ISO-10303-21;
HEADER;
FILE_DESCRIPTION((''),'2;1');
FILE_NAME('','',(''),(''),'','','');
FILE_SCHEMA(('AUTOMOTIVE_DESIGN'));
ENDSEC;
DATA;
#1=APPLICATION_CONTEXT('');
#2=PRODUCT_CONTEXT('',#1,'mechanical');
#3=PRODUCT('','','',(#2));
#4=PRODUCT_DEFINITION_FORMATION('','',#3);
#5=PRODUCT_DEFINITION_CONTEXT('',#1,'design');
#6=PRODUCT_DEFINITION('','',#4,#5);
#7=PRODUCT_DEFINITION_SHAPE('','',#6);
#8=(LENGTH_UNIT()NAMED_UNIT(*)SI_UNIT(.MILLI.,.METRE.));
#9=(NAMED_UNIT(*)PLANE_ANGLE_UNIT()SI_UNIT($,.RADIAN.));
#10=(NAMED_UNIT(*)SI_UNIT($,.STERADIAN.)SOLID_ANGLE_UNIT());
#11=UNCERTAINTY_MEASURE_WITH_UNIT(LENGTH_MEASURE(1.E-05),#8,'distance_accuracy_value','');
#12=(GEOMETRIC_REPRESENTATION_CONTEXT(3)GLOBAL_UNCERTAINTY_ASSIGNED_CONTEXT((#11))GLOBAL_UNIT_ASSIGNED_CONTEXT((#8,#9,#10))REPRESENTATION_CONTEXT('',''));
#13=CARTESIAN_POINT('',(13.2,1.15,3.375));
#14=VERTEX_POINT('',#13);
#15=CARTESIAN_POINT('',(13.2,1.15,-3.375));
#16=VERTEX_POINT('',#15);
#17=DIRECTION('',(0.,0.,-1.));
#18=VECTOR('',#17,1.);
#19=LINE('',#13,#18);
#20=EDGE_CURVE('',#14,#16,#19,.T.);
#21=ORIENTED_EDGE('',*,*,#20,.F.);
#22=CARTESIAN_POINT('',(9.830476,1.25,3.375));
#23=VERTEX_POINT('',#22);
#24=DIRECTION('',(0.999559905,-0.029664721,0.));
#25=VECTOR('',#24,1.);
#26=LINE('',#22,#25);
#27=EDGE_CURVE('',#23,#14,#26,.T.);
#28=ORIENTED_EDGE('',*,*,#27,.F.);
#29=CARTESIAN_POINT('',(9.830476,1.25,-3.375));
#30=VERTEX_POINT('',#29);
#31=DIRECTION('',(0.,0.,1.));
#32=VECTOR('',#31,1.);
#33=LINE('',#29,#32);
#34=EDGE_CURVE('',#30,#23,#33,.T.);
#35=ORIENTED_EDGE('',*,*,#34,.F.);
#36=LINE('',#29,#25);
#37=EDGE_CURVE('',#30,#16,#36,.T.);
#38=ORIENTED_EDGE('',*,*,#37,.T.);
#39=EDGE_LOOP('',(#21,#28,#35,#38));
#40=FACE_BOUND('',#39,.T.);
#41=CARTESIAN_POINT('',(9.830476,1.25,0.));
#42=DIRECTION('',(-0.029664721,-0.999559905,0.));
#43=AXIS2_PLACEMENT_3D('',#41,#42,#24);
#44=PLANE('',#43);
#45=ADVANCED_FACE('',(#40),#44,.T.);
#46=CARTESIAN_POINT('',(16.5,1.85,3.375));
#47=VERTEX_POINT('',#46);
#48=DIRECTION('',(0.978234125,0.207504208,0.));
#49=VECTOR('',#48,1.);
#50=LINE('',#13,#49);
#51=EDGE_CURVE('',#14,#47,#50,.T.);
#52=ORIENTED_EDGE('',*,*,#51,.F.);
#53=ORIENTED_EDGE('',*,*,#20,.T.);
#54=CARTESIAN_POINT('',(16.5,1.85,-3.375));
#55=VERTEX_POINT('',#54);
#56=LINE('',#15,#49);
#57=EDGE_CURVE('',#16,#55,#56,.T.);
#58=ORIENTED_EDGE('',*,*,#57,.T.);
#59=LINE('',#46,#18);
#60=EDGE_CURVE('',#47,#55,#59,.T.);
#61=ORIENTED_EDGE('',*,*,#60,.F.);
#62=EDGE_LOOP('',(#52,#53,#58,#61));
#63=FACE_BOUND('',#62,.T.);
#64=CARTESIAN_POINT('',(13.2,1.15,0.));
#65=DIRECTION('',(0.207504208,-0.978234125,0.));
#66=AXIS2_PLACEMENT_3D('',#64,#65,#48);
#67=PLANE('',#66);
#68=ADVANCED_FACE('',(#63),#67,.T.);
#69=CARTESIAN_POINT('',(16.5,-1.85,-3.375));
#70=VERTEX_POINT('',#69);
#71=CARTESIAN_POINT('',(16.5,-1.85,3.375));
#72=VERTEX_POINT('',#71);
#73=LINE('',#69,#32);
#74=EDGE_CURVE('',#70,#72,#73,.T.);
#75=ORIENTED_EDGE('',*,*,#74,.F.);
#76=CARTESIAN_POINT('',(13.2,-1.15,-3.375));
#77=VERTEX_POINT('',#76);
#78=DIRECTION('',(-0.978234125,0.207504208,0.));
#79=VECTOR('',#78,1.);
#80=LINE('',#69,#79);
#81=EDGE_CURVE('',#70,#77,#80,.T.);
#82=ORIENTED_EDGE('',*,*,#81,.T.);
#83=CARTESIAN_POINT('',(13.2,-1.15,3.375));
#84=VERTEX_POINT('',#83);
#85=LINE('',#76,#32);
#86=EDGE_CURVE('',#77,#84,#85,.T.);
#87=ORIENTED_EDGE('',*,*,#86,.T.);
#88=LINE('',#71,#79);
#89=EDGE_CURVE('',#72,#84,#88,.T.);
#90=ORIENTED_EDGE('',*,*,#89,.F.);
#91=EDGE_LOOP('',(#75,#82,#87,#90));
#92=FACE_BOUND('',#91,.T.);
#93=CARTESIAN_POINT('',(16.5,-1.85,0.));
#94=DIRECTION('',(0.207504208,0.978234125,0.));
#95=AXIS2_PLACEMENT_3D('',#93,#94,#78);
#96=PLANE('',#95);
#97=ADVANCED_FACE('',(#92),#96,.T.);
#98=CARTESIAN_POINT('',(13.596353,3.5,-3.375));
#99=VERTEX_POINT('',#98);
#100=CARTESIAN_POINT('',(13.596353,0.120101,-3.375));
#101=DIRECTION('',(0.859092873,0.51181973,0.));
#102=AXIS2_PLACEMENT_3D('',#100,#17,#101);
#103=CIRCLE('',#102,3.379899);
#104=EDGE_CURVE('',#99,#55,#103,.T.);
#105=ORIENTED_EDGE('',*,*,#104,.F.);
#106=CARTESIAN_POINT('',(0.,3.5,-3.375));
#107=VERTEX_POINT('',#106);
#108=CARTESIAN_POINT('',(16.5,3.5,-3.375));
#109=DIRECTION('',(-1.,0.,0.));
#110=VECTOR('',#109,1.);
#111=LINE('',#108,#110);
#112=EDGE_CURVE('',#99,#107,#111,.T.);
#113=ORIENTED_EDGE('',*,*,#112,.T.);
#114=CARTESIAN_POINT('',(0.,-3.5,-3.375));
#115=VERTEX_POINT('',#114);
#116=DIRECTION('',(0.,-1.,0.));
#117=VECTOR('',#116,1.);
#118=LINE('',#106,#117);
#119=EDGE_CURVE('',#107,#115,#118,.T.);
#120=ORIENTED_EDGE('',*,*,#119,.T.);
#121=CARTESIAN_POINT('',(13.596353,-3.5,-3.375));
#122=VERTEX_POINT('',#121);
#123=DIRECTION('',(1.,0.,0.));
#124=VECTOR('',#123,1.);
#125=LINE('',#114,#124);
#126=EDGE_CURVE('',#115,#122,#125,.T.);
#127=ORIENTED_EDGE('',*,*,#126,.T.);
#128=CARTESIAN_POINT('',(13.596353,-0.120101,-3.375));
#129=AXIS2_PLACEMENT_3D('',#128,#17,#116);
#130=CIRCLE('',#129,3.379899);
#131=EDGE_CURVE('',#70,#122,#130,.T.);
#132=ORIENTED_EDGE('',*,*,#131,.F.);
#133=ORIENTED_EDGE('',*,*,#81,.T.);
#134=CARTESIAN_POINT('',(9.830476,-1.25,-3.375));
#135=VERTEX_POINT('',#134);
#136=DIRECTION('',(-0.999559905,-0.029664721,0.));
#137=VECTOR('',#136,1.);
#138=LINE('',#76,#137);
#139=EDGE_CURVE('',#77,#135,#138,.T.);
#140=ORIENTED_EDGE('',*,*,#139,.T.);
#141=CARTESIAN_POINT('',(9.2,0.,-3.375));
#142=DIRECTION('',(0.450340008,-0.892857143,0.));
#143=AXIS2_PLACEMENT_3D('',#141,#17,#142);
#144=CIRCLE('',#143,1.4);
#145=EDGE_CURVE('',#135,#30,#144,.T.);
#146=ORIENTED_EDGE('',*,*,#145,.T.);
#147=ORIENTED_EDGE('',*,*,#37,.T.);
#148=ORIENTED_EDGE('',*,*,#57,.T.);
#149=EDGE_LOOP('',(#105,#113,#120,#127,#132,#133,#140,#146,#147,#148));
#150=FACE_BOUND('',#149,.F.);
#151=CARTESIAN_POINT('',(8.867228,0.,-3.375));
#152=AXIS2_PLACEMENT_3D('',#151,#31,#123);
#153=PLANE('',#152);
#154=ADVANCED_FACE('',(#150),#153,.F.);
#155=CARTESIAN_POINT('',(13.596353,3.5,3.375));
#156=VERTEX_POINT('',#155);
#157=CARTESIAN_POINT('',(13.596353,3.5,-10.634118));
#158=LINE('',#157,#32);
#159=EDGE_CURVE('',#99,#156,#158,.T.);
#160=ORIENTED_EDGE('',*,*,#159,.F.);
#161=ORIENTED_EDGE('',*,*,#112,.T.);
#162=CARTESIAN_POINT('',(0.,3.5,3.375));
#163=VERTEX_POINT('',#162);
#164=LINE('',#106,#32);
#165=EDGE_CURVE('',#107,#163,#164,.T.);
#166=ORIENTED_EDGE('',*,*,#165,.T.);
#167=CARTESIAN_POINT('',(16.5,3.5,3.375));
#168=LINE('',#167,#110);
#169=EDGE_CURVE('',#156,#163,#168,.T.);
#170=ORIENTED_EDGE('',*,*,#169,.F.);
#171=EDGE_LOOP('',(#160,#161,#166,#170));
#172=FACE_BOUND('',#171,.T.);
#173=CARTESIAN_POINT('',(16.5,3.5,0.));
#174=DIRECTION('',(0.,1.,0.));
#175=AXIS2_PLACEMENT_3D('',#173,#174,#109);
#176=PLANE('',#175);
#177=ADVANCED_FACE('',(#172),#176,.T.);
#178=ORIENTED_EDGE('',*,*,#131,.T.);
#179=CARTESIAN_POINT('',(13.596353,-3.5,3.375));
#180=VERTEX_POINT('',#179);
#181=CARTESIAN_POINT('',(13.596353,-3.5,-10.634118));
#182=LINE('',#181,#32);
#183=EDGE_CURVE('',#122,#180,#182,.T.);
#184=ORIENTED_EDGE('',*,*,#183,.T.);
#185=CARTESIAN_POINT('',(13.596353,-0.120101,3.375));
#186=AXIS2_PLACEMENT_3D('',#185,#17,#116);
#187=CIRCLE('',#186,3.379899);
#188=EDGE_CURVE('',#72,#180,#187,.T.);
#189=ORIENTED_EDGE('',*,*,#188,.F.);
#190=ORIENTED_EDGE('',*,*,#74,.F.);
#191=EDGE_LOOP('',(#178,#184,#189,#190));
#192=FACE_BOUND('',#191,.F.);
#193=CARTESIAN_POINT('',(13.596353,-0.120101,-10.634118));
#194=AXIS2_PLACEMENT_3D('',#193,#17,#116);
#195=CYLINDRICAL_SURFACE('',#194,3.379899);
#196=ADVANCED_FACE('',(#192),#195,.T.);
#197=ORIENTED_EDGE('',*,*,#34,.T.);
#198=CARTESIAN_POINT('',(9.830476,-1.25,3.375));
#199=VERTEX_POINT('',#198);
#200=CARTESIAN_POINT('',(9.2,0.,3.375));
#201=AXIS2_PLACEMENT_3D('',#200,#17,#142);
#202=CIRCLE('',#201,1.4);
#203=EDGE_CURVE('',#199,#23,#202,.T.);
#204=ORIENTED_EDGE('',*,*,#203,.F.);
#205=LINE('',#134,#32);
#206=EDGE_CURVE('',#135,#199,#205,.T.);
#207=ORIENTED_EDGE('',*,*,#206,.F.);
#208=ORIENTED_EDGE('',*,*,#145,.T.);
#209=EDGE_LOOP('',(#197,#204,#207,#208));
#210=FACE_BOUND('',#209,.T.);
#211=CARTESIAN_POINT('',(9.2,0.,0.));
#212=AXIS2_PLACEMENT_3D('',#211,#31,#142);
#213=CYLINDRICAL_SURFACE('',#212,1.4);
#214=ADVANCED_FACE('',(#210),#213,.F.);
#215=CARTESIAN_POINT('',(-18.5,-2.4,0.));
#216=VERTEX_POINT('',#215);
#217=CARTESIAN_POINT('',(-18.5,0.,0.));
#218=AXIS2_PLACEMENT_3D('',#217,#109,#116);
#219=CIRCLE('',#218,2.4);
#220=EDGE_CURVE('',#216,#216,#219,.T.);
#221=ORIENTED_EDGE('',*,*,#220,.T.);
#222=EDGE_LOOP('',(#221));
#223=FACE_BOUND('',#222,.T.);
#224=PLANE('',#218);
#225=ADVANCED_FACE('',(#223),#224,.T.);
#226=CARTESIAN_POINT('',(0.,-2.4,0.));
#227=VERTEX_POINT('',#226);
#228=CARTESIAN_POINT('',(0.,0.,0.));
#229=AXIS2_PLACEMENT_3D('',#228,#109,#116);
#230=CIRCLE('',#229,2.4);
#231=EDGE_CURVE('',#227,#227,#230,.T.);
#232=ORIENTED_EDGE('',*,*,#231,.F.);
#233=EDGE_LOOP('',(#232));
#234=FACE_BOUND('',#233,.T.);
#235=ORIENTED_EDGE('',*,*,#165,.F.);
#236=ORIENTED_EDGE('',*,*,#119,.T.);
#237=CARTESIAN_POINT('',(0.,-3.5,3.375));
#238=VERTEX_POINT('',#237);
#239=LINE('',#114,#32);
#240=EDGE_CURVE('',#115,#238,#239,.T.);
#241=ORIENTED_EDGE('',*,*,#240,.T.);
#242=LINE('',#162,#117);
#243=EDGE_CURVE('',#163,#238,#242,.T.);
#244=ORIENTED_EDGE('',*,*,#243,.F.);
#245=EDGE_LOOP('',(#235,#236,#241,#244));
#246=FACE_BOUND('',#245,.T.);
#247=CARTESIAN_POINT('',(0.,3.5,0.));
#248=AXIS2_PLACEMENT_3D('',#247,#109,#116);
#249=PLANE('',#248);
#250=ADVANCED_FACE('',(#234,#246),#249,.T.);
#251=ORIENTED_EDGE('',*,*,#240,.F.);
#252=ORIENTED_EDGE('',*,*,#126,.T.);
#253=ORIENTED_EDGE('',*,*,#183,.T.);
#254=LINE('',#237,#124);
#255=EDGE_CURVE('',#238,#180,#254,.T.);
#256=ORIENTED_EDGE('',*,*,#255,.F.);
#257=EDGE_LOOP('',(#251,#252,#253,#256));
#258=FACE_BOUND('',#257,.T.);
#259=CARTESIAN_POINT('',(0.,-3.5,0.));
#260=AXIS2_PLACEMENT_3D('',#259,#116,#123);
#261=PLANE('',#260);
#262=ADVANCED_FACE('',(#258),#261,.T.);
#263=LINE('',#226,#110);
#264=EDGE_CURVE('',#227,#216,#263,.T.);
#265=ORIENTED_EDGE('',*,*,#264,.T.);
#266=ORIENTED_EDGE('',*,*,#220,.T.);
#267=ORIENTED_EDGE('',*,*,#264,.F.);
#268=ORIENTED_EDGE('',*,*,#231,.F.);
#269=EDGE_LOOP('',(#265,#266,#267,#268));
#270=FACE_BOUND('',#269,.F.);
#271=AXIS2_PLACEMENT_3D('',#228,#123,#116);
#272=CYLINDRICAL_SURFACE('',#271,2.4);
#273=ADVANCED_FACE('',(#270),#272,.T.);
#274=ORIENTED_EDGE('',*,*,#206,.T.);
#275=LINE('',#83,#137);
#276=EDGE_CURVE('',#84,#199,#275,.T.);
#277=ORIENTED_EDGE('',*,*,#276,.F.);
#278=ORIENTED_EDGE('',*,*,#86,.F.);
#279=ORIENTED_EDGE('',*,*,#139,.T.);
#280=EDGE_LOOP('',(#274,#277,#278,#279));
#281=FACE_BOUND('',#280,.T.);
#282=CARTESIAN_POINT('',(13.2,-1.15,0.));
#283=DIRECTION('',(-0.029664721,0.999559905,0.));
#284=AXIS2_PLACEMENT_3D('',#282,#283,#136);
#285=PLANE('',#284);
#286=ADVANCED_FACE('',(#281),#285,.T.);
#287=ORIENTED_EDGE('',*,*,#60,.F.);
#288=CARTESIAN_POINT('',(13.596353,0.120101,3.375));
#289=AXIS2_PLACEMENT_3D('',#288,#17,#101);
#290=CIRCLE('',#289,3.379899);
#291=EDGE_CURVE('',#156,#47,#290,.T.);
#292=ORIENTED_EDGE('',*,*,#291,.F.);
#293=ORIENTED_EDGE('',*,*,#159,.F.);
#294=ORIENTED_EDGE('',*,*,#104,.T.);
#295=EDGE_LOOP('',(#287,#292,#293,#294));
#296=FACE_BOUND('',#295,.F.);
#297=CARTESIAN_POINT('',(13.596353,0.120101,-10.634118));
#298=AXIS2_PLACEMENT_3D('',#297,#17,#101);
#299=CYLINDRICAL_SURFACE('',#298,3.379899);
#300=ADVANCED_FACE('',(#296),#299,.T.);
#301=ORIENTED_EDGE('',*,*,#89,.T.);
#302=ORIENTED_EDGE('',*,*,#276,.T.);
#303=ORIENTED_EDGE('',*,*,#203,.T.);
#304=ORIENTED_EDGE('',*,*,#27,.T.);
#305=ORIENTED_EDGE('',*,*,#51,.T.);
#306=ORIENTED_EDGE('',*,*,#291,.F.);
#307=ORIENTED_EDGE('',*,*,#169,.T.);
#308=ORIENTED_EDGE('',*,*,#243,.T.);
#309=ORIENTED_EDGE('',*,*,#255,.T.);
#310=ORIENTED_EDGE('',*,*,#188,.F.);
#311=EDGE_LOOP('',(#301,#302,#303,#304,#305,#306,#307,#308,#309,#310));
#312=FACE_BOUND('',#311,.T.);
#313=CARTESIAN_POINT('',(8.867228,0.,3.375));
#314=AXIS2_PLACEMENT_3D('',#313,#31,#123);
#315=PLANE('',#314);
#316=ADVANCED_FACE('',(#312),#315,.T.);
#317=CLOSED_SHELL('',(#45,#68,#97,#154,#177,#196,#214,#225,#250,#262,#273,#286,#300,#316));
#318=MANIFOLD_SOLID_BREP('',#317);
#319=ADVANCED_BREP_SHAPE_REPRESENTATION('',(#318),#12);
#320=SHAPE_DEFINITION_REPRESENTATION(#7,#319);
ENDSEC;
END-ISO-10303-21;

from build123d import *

# Parameters (mm, degrees)
F1_DEPTH      = 3.375
F1_DEPTH_BACK = 3.375
F2_R          = 2.4
F3_DEPTH      = 18.5
F4_T1_DEPTH   = 21.2682356522


# Not quite as in the source:
# - a fillet or chamfer that OpenCascade refuses, or shapes differently, is made with other operations: its cross-section is extruded or revolved along the edge and cut away or added


with BuildPart() as f1:
    # F0 (on Top) → F1 (new body, two sides)
    with BuildSketch(Plane.XY) as f1_sk:
        with BuildLine():
            Line((16.5, 3.5), (0, 3.5))
            Line((0, 3.5), (0, 2.35))
            Line((0, 2.35), (0, -2.35))
            Line((0, -2.35), (0, -3.5))
            Line((0, -3.5), (16.5, -3.5))
            Line((16.5, -3.5), (16.5, -1.85))
            Line((16.5, -1.85), (13.2, -1.15))
            Line((13.2, -1.15), (9.8304760106, -1.25))
            ThreePointArc((9.8304760106, -1.25), (7.8, 0), (9.8304760106, 1.25))
            Line((9.8304760106, 1.25), (13.2, 1.15))
            Line((13.2, 1.15), (16.5, 1.85))
            Line((16.5, 1.85), (16.5, 3.5))
        make_face()
    extrude(amount=F1_DEPTH)
    extrude(f1_sk.sketch, amount=-F1_DEPTH_BACK)

    # F2 (on face) → F3 (join)
    with BuildSketch(Plane(origin=(0, 0, 0), x_dir=(0, -1, 0), z_dir=(-1, 0, 0))):
        Circle(F2_R)
    extrude(amount=F3_DEPTH)

    # F4: fillet of radius 3.3798989873 on 2 edges, made by hand

    # F4_s2 → F4_t1 (cut)
    with BuildSketch(Plane.XY.offset(-10.6341178261)):
        with BuildLine():
            ThreePointArc((13.5963528696, -3.5), (15.2662081521, -3.0586891941), (16.5, -1.85))
            Line((16.5, -1.85), (16.5, -3.5))
            Line((16.5, -3.5), (13.5963528696, -3.5))
        make_face()
        with BuildLine():
            ThreePointArc((16.5, 1.85), (15.2662081521, 3.0586891941), (13.5963528696, 3.5))
            Line((13.5963528696, 3.5), (16.5, 3.5))
            Line((16.5, 3.5), (16.5, 1.85))
        make_face()
    extrude(amount=F4_T1_DEPTH, mode=Mode.SUBTRACT)


solid = f1.part
